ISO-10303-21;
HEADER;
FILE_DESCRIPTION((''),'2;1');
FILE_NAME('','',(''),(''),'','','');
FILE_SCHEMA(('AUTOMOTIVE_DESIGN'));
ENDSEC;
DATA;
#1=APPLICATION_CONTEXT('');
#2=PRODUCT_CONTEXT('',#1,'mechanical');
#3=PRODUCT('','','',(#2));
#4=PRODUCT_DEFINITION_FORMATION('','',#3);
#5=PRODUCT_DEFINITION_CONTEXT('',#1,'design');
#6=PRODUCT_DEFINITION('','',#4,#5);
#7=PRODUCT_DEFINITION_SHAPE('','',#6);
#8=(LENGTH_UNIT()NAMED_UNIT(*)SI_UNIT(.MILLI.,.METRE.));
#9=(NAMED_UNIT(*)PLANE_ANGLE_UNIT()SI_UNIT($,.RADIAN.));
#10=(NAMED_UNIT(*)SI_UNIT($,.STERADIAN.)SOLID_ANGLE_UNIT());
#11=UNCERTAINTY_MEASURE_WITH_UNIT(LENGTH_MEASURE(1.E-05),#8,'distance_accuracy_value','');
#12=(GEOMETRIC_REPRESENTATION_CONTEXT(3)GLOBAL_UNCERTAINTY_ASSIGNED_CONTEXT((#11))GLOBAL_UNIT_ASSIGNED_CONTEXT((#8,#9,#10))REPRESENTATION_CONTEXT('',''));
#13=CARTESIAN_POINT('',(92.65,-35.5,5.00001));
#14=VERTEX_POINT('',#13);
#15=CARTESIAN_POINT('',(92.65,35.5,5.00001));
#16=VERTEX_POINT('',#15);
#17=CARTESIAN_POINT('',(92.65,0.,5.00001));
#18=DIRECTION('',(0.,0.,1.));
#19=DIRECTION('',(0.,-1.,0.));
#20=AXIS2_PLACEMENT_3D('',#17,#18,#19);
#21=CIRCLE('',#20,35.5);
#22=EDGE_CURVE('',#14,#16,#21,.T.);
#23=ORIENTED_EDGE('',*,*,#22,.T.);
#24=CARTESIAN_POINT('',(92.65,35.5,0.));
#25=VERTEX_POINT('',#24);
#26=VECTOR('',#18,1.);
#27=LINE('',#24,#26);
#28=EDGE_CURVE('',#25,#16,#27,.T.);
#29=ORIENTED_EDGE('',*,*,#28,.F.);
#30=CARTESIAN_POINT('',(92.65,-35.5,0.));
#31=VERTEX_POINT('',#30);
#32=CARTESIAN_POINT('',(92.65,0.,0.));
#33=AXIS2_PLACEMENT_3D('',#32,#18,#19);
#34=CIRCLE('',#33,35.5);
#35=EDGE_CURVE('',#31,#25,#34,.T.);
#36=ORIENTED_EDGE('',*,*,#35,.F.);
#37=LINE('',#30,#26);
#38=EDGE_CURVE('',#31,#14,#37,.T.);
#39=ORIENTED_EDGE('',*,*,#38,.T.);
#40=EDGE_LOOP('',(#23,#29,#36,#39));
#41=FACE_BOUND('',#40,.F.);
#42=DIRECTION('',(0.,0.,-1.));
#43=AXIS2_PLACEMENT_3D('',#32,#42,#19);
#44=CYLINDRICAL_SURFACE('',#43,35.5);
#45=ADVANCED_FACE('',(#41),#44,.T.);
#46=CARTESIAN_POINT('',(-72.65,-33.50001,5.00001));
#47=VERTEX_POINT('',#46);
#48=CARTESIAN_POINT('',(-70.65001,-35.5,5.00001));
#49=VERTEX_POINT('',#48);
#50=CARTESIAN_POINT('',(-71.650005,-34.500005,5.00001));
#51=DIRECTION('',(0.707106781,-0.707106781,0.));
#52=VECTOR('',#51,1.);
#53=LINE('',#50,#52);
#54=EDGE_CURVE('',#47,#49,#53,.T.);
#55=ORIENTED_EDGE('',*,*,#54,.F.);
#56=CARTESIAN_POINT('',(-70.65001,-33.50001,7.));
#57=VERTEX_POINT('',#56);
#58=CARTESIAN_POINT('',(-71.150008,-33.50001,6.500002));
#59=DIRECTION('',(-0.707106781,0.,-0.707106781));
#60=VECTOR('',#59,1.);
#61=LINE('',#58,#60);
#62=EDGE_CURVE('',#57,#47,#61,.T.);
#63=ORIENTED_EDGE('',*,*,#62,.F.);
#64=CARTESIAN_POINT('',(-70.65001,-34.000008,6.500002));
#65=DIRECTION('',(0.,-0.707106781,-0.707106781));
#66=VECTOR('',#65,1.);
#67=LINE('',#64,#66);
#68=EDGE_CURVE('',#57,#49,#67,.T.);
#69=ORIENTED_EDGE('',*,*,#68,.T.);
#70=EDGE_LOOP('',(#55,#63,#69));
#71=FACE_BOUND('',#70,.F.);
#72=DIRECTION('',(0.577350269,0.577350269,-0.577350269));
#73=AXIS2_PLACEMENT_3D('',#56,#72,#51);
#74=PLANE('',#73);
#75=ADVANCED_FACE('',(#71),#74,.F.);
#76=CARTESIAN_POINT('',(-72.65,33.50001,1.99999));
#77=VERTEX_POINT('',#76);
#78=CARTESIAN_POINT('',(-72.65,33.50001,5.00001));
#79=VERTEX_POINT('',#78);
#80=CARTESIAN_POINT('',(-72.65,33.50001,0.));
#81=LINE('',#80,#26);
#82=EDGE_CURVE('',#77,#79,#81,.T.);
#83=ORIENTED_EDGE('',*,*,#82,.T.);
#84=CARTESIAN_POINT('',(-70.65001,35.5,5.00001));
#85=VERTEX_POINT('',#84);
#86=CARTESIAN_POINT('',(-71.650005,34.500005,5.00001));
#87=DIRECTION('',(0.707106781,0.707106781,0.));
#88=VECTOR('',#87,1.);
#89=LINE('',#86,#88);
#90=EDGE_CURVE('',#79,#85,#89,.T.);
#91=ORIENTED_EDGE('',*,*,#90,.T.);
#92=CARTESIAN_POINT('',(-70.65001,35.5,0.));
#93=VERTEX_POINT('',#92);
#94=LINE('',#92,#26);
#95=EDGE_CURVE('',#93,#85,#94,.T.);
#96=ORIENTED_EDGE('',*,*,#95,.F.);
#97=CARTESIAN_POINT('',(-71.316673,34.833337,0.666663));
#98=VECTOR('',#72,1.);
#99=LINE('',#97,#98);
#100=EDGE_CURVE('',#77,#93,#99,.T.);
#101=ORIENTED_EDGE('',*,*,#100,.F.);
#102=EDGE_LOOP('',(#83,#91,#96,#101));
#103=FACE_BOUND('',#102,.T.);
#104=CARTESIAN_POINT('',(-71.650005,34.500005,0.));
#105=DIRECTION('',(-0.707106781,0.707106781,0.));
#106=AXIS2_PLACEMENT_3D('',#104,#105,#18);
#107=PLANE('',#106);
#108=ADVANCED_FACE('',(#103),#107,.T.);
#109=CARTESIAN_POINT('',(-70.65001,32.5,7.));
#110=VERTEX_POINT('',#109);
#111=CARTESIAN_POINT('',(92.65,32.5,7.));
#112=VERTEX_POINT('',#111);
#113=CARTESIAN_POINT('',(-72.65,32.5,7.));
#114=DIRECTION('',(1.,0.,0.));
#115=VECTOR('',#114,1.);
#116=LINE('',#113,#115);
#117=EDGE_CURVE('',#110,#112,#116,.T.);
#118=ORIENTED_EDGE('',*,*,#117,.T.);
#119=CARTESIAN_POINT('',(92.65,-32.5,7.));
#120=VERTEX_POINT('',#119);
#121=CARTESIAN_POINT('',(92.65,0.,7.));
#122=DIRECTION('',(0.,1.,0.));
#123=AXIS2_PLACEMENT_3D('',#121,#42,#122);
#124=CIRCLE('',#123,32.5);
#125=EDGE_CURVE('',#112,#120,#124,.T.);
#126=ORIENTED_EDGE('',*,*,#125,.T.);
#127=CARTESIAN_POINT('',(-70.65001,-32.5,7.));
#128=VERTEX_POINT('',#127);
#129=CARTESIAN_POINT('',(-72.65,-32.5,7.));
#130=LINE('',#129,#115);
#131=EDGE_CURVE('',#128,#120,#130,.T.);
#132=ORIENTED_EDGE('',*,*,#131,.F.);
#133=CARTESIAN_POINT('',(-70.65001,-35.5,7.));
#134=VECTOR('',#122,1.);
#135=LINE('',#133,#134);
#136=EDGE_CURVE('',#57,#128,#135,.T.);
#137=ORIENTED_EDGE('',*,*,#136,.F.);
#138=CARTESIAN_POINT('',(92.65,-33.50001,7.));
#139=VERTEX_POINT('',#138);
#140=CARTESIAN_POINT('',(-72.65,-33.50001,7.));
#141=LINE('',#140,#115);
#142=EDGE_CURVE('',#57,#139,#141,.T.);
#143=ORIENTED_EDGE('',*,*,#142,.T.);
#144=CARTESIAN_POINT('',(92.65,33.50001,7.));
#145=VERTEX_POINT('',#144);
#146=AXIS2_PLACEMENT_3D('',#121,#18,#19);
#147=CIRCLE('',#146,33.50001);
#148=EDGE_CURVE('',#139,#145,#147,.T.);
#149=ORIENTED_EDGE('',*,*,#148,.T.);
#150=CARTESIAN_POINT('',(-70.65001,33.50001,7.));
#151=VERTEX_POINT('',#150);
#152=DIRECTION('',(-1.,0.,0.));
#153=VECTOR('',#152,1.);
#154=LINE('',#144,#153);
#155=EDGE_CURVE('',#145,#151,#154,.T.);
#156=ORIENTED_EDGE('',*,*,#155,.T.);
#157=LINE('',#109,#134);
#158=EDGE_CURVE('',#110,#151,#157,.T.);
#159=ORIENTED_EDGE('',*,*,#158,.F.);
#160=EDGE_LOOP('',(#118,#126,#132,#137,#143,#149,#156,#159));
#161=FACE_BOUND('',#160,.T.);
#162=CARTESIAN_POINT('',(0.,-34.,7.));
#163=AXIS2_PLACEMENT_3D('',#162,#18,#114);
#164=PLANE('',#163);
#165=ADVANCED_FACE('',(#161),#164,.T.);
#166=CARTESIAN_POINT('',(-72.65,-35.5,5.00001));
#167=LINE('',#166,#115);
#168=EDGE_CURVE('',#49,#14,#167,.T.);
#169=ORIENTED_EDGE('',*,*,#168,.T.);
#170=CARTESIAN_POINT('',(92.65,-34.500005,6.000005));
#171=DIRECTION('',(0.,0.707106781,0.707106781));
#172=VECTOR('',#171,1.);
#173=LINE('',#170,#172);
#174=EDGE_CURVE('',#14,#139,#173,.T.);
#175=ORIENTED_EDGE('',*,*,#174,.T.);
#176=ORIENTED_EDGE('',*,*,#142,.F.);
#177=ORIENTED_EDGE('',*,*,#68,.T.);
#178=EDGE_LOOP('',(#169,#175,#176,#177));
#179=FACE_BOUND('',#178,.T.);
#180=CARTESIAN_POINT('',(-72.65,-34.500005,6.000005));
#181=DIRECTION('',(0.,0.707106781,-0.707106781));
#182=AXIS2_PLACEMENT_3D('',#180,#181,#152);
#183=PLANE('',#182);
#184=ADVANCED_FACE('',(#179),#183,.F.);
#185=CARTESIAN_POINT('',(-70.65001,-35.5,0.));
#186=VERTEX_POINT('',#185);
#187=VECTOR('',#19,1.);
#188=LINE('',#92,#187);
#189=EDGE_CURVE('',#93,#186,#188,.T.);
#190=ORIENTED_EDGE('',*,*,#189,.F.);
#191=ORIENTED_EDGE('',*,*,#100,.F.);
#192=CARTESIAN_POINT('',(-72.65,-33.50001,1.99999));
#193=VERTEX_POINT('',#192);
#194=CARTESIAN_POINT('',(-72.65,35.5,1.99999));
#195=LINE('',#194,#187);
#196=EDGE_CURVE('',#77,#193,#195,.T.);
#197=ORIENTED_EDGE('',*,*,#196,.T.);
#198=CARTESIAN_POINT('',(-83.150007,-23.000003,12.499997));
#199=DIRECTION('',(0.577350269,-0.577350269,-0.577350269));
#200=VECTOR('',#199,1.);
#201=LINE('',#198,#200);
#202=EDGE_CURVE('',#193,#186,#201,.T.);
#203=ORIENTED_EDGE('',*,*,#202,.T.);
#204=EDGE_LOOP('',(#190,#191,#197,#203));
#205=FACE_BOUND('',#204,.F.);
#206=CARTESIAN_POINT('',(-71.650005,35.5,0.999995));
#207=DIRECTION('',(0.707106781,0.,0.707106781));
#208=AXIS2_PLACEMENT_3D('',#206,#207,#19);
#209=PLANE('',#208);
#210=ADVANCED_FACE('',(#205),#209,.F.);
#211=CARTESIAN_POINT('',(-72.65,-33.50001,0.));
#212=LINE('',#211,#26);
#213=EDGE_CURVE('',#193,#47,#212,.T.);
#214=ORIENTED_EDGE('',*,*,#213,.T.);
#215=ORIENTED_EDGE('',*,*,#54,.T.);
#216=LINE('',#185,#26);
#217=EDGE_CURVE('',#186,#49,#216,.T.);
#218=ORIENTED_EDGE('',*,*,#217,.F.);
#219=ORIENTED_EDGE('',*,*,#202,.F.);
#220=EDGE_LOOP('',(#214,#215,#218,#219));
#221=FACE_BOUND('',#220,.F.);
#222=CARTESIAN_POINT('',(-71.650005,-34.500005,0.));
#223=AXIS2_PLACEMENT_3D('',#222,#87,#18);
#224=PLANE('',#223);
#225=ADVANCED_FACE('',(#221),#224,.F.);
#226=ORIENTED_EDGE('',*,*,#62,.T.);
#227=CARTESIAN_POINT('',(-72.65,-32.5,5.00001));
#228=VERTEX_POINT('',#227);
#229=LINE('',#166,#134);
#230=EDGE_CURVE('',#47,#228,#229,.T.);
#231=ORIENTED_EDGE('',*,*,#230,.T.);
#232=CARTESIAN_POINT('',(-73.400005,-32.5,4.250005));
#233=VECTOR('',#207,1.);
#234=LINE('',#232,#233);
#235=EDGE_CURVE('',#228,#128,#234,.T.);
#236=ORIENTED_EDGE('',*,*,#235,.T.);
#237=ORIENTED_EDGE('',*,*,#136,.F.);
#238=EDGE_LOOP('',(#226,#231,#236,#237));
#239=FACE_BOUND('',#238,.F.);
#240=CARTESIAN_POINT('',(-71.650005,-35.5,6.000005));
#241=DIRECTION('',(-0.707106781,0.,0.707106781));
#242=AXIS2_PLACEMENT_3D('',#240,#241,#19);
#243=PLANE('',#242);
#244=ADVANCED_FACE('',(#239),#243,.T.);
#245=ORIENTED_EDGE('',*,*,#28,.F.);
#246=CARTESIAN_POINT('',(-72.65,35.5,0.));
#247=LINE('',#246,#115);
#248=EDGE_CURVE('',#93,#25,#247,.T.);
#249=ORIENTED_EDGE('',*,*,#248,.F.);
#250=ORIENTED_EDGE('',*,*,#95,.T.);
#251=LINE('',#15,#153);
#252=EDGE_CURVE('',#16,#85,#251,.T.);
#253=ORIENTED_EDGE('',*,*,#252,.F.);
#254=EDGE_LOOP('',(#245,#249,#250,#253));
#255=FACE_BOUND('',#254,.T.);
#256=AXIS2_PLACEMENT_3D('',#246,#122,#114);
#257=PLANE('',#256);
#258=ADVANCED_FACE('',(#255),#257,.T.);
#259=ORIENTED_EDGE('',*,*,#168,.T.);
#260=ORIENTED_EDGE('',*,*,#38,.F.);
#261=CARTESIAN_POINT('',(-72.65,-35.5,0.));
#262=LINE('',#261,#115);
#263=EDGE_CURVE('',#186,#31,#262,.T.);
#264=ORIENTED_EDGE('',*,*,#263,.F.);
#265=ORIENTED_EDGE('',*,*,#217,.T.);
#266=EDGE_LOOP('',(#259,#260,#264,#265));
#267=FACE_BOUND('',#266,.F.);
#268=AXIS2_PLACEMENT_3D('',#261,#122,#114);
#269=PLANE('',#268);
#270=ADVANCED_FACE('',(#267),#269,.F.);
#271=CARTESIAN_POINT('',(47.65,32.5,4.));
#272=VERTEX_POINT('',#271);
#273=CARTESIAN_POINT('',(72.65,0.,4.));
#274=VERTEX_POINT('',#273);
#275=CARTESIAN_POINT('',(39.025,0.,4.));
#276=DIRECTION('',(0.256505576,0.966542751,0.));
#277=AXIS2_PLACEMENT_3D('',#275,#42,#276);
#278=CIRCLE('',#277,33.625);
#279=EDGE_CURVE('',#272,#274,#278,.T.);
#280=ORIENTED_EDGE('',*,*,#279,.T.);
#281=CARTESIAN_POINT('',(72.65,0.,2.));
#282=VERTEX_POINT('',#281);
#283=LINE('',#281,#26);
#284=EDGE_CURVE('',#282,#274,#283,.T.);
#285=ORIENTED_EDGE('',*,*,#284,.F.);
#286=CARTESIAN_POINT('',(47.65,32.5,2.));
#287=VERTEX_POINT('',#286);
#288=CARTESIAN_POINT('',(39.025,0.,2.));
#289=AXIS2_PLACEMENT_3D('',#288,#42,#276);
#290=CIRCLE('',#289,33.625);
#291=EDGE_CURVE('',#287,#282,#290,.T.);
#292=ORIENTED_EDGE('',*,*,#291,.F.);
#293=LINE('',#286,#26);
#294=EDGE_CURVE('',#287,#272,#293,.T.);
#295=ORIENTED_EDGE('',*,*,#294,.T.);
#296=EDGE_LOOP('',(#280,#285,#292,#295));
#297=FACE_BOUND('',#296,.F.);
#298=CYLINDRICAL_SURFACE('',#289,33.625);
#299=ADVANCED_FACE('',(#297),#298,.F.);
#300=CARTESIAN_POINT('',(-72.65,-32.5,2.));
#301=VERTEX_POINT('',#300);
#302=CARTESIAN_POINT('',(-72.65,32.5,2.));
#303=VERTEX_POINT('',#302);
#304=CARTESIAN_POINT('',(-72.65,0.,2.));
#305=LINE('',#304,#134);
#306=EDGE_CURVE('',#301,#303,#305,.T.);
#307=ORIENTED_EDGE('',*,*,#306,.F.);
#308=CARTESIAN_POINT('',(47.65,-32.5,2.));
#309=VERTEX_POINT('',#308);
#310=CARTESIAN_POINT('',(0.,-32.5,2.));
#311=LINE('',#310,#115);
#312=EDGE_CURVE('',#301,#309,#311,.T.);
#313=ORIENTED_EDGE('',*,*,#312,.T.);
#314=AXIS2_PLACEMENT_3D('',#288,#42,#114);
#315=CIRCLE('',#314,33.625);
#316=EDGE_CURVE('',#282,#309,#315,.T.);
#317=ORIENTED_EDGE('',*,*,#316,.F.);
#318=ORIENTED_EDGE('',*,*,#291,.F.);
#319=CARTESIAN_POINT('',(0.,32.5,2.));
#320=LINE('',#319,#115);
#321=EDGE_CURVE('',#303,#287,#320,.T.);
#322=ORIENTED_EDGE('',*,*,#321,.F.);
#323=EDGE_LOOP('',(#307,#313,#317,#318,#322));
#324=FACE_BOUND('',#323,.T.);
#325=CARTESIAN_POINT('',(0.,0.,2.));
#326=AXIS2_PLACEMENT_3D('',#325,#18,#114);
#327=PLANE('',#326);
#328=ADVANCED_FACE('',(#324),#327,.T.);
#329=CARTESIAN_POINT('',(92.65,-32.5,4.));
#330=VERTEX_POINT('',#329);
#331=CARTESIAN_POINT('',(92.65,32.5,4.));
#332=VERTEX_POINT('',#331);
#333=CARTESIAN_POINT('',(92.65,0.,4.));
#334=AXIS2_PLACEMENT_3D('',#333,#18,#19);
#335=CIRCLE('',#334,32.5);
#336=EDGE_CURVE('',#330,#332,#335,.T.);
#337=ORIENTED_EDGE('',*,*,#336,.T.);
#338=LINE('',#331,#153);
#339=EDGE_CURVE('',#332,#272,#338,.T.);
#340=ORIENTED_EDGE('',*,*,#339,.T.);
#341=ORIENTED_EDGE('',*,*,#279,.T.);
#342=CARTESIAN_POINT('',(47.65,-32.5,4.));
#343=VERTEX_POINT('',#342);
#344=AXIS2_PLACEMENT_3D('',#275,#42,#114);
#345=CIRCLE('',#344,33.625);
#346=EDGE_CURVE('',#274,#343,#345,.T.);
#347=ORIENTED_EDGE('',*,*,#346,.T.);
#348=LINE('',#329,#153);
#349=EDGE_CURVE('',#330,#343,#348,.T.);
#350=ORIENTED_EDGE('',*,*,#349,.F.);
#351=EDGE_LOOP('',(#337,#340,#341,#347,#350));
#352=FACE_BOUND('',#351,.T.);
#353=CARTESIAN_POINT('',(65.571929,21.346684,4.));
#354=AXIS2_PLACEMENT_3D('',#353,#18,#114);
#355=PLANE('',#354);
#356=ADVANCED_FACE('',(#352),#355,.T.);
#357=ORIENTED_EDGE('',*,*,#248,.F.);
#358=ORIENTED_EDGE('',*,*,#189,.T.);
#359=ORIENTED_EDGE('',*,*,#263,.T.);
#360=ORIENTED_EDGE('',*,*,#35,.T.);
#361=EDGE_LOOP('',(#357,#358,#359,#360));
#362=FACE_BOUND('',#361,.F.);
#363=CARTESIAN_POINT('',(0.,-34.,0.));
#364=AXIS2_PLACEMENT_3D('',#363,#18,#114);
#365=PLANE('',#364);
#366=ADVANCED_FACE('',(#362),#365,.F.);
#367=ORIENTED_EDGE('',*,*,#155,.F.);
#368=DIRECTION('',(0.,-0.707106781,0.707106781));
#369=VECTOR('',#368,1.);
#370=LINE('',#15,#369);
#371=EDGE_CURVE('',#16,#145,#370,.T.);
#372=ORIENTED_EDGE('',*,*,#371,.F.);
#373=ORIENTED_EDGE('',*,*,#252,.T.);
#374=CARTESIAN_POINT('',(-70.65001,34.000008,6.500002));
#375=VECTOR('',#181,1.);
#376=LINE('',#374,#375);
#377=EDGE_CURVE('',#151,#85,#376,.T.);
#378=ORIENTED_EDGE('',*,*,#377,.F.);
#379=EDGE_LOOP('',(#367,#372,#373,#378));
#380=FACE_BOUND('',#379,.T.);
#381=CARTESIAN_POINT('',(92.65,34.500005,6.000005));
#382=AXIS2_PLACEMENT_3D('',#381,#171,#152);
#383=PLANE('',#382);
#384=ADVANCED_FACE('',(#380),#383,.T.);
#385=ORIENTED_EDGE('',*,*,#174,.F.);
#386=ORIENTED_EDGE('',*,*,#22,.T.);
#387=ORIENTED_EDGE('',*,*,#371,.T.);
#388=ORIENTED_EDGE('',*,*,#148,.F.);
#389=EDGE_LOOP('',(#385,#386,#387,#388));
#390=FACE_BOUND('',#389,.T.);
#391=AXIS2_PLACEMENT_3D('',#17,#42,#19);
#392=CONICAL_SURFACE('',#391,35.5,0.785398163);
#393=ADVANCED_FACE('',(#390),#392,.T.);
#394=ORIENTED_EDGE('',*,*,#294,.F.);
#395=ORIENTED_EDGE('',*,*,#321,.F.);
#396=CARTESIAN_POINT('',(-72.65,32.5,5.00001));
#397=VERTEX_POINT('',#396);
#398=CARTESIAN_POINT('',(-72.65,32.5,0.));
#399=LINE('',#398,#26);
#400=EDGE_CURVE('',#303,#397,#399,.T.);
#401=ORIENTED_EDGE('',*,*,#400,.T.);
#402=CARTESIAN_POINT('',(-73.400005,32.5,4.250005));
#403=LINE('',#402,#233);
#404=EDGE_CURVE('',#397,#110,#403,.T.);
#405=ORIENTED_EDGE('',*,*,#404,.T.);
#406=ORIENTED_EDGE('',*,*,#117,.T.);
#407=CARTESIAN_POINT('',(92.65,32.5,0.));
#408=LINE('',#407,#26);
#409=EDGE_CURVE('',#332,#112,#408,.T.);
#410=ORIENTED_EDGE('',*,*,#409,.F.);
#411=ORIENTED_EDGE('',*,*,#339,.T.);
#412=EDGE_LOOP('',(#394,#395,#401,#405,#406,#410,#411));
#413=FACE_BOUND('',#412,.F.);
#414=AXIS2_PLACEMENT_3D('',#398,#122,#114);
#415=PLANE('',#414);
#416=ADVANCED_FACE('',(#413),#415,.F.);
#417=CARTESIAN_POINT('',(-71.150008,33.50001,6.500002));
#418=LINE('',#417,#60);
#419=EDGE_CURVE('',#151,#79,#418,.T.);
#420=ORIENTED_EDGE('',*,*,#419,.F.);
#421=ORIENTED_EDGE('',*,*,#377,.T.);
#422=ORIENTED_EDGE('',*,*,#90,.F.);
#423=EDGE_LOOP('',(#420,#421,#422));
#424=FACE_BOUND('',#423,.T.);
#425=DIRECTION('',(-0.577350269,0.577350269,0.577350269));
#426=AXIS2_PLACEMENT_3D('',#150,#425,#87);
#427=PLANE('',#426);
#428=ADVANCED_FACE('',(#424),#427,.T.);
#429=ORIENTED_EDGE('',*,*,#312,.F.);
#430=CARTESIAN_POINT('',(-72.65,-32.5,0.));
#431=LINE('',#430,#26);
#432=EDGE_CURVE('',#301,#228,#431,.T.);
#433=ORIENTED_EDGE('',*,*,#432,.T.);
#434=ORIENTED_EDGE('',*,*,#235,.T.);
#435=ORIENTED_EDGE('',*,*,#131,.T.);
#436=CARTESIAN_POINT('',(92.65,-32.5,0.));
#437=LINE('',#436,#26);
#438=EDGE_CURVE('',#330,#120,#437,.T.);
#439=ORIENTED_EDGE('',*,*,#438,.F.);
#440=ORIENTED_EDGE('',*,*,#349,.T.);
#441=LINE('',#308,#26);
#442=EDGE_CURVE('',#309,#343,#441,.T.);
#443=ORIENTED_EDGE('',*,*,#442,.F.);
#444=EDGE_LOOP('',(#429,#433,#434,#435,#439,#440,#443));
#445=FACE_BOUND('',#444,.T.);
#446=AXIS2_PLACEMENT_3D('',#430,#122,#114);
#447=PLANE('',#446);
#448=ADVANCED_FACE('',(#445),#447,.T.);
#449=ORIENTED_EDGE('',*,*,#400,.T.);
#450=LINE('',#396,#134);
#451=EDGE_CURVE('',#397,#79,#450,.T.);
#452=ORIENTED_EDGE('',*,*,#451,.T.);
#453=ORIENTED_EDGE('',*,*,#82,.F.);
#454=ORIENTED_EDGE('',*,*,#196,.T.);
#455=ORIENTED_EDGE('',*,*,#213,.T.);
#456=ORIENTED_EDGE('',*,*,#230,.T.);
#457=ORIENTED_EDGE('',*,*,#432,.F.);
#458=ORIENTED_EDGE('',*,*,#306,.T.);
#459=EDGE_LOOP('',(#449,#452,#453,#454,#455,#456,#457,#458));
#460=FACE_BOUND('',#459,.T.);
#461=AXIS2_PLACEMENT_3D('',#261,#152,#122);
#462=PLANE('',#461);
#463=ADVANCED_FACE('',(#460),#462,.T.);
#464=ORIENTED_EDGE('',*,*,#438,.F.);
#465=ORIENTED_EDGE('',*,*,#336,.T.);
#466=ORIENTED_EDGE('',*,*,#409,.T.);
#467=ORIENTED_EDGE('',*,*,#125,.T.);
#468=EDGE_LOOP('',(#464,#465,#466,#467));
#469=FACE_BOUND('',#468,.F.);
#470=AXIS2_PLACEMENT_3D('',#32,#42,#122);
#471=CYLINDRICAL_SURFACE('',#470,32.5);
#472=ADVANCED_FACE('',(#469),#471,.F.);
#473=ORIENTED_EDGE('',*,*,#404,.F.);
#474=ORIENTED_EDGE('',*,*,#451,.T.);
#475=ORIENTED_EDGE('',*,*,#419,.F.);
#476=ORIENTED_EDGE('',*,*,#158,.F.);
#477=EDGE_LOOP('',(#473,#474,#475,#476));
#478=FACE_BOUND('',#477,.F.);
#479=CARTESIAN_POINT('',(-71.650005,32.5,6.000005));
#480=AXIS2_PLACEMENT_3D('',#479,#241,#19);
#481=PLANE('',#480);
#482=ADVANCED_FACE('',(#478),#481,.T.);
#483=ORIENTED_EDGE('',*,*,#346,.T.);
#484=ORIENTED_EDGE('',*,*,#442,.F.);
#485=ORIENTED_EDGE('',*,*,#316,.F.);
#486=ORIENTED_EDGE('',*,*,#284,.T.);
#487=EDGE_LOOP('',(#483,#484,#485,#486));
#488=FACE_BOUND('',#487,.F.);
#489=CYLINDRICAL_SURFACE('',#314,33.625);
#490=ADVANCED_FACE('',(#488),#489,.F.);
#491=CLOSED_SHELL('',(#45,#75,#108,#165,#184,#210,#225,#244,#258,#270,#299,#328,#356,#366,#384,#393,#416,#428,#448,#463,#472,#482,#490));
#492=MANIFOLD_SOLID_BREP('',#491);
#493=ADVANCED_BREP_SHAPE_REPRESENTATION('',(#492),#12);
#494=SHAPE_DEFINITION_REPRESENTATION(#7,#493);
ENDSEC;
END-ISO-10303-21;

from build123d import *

# Parameters (mm, degrees)
F0_W     = 145.3
F0_H     = 65
F1_DEPTH = 2
F0_W_2   = 20
F3_DEPTH = 4
F4_DEPTH = 2
F0_H_2   = 3
F5_DEPTH = 7
F6_DEPTH = 7
F7_SIZE  = 1.99999


# Not quite as in the source:
# - a fillet or chamfer is up to 0.001 mm smaller than in the source, because OpenCascade refuses the exact size


with BuildPart() as f1:
    # F0 (on Top) → F1 (new body)
    with BuildSketch(Plane.XY):
        Rectangle(F0_W, F0_H)
    extrude(amount=F1_DEPTH)

    # F0 (on Top) → F3 (join)
    with BuildSketch(Plane.XY):
        with Locations((82.65, 0)):
            Rectangle(F0_W_2, F0_H)
        with BuildLine():
            ThreePointArc((92.65, -32.5), (125.15, 0), (92.65, 32.5))
            Line((92.65, 32.5), (92.65, -32.5))
        make_face()
    extrude(amount=F3_DEPTH)

    # F2 (on face) → F4 (join)
    with BuildSketch(Plane.XY.offset(2)):
        with BuildLine():
            ThreePointArc((47.65, 32.5), (65.6769816336, 20.5015243336), (72.65, 0))
            Line((72.65, 0), (72.65, 32.5))
            Line((72.65, 32.5), (47.65, 32.5))
        make_face()
        with BuildLine():
            ThreePointArc((72.65, 0), (65.6769816336, -20.5015243336), (47.65, -32.5))
            Line((47.65, -32.5), (72.65, -32.5))
            Line((72.65, -32.5), (72.65, 0))
        make_face()
    extrude(amount=F4_DEPTH)

    # F0 (on Top) → F5 (join)
    with BuildSketch(Plane.XY):
        with BuildLine():
            Line((92.65, 35.5), (92.65, 32.5))
            ThreePointArc((92.65, 32.5), (125.15, 0), (92.65, -32.5))
            Line((92.65, -32.5), (92.65, -35.5))
            ThreePointArc((92.65, -35.5), (128.15, 0), (92.65, 35.5))
        make_face()
        with Locations((82.65, -34)):
            Rectangle(F0_W_2, F0_H_2)
        with Locations((82.65, 34)):
            Rectangle(F0_W_2, F0_H_2)
    extrude(amount=F5_DEPTH)

    # F0 (on Top) → F6 (join)
    with BuildSketch(Plane.XY):
        with Locations((0, -34)):
            Rectangle(F0_W, F0_H_2)
        with Locations((0, 34)):
            Rectangle(F0_W, F0_H_2)
    extrude(amount=F6_DEPTH)

    # F7 (size 2 in the source; OpenCascade refuses exactly that, so slightly less here)
    f7_edges = [f1.edges().sort_by_distance(p)[0] for p in [
        (-72.65, 35.5, 3.5),
        (-72.65, -35.5, 3.5),
        (-72.65, -34, 7),
        (-72.65, 34, 7),
        (-72.65, 0, 0),
        (10, 35.5, 7),
    ]]
    chamfer(f7_edges, length=F7_SIZE)


solid = f1.part
